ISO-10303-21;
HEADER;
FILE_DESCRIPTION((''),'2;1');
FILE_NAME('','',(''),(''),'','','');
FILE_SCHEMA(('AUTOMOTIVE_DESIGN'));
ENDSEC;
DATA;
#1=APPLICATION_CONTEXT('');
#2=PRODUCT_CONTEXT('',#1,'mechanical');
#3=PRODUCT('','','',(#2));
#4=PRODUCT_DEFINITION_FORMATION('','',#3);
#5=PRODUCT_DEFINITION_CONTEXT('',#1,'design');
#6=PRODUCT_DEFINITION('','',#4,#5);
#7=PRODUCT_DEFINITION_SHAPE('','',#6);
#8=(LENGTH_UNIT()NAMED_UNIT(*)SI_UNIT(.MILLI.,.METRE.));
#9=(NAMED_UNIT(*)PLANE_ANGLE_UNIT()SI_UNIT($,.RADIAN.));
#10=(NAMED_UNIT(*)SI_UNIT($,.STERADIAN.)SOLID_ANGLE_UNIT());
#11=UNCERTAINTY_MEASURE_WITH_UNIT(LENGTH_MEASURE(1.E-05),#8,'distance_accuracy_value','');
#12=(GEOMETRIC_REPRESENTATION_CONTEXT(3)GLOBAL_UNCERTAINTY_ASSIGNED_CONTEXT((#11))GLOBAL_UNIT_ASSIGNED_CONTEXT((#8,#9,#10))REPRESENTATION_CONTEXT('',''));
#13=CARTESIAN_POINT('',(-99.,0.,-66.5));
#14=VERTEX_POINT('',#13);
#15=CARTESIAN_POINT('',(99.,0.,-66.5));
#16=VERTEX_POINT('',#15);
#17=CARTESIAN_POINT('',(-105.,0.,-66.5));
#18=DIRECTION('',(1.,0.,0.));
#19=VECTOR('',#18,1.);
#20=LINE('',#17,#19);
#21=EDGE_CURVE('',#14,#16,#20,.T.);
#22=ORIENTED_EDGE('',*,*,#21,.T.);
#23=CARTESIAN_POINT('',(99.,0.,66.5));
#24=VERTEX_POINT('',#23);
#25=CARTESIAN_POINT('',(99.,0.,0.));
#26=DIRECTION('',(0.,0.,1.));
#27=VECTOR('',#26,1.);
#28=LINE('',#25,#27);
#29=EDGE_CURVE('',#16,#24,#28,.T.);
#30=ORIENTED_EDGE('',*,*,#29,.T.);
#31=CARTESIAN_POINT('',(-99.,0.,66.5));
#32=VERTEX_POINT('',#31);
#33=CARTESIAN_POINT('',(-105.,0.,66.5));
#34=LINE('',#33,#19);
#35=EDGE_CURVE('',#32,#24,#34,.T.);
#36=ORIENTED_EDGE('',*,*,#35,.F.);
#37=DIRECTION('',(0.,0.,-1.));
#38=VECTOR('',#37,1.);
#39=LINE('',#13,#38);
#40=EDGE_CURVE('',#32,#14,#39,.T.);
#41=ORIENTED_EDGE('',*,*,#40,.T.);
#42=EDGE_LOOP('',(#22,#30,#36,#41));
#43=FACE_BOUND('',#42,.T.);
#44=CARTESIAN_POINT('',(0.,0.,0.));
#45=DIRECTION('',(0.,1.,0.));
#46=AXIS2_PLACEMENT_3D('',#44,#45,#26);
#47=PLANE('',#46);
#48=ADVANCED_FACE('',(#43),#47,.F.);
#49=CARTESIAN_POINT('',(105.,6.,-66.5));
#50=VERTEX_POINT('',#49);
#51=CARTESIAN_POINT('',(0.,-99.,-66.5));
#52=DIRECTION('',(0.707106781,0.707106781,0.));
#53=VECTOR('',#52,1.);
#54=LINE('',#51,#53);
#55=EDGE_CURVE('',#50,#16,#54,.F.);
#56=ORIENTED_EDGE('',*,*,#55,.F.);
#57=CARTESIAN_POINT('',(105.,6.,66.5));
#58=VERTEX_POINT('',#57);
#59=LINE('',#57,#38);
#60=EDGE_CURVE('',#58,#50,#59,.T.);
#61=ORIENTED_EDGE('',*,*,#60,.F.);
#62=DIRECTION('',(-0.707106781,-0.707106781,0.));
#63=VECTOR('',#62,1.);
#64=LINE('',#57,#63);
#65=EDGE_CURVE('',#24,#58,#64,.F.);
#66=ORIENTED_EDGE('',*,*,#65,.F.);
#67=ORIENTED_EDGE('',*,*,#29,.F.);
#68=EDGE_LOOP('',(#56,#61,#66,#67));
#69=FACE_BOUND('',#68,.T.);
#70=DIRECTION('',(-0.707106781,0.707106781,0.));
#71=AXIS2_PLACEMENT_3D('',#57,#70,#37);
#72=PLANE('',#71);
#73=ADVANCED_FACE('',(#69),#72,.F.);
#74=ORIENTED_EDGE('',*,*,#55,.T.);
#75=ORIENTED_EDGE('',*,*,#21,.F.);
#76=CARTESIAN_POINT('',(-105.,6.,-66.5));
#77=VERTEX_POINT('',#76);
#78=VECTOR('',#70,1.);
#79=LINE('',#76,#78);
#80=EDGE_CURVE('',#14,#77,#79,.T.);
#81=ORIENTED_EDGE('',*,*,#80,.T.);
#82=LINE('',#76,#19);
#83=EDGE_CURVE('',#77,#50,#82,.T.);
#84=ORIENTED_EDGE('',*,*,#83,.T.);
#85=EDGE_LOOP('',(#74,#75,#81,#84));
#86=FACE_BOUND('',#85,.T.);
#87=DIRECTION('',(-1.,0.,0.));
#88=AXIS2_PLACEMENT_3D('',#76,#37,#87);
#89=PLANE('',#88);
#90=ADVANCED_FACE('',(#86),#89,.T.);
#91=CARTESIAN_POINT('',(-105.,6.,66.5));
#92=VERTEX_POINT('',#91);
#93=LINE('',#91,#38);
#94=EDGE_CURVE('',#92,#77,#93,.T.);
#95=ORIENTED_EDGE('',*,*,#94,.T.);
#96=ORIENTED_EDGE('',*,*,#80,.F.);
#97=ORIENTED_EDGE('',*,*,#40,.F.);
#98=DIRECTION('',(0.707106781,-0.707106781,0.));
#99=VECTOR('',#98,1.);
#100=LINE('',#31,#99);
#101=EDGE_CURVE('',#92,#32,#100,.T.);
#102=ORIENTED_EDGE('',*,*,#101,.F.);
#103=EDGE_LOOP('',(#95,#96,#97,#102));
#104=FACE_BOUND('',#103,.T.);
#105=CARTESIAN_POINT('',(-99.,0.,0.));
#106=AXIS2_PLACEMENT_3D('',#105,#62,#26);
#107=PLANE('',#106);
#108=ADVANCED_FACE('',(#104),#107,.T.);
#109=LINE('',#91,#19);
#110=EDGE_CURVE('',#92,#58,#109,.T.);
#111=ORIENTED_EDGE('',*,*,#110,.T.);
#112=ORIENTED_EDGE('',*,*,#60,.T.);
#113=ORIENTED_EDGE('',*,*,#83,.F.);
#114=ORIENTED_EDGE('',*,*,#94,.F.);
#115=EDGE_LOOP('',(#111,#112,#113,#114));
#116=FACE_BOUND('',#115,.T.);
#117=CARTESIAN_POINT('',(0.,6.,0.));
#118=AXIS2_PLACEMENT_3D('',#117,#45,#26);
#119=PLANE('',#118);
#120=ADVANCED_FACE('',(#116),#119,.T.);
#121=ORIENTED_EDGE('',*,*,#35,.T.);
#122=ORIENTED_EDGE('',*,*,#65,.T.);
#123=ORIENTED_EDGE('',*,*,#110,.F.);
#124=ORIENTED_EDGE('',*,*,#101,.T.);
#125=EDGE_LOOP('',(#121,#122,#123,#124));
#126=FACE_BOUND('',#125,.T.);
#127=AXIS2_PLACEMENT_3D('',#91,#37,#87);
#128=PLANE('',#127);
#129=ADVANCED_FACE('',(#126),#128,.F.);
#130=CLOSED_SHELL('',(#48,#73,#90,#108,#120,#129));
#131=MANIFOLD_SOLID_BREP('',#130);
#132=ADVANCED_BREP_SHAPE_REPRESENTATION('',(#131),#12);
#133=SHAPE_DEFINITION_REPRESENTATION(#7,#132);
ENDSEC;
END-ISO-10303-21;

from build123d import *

# Parameters (mm, degrees)
SKETCH1_W           = 210
SKETCH1_H           = 133
BOSS_EXTRUDE1_DEPTH = 6
CHAMFER1_SIZE       = 6


with BuildPart() as part:
    # Sketch1 → Boss-Extrude1 (new body)
    with BuildSketch(Plane(origin=(0, 0, 0), x_dir=(1, 0, 0), z_dir=(0, 1, 0))):
        Rectangle(SKETCH1_W, SKETCH1_H)
    extrude(amount=BOSS_EXTRUDE1_DEPTH)

    # Chamfer1
    chamfer1_edges = [part.edges().sort_by_distance(p)[0] for p in [
        (105, 0, 0),
        (-105, 0, 0),
    ]]
    chamfer(chamfer1_edges, length=CHAMFER1_SIZE - 0.0001)  # a hair under: the kernel refuses the full size


solid = part.part
